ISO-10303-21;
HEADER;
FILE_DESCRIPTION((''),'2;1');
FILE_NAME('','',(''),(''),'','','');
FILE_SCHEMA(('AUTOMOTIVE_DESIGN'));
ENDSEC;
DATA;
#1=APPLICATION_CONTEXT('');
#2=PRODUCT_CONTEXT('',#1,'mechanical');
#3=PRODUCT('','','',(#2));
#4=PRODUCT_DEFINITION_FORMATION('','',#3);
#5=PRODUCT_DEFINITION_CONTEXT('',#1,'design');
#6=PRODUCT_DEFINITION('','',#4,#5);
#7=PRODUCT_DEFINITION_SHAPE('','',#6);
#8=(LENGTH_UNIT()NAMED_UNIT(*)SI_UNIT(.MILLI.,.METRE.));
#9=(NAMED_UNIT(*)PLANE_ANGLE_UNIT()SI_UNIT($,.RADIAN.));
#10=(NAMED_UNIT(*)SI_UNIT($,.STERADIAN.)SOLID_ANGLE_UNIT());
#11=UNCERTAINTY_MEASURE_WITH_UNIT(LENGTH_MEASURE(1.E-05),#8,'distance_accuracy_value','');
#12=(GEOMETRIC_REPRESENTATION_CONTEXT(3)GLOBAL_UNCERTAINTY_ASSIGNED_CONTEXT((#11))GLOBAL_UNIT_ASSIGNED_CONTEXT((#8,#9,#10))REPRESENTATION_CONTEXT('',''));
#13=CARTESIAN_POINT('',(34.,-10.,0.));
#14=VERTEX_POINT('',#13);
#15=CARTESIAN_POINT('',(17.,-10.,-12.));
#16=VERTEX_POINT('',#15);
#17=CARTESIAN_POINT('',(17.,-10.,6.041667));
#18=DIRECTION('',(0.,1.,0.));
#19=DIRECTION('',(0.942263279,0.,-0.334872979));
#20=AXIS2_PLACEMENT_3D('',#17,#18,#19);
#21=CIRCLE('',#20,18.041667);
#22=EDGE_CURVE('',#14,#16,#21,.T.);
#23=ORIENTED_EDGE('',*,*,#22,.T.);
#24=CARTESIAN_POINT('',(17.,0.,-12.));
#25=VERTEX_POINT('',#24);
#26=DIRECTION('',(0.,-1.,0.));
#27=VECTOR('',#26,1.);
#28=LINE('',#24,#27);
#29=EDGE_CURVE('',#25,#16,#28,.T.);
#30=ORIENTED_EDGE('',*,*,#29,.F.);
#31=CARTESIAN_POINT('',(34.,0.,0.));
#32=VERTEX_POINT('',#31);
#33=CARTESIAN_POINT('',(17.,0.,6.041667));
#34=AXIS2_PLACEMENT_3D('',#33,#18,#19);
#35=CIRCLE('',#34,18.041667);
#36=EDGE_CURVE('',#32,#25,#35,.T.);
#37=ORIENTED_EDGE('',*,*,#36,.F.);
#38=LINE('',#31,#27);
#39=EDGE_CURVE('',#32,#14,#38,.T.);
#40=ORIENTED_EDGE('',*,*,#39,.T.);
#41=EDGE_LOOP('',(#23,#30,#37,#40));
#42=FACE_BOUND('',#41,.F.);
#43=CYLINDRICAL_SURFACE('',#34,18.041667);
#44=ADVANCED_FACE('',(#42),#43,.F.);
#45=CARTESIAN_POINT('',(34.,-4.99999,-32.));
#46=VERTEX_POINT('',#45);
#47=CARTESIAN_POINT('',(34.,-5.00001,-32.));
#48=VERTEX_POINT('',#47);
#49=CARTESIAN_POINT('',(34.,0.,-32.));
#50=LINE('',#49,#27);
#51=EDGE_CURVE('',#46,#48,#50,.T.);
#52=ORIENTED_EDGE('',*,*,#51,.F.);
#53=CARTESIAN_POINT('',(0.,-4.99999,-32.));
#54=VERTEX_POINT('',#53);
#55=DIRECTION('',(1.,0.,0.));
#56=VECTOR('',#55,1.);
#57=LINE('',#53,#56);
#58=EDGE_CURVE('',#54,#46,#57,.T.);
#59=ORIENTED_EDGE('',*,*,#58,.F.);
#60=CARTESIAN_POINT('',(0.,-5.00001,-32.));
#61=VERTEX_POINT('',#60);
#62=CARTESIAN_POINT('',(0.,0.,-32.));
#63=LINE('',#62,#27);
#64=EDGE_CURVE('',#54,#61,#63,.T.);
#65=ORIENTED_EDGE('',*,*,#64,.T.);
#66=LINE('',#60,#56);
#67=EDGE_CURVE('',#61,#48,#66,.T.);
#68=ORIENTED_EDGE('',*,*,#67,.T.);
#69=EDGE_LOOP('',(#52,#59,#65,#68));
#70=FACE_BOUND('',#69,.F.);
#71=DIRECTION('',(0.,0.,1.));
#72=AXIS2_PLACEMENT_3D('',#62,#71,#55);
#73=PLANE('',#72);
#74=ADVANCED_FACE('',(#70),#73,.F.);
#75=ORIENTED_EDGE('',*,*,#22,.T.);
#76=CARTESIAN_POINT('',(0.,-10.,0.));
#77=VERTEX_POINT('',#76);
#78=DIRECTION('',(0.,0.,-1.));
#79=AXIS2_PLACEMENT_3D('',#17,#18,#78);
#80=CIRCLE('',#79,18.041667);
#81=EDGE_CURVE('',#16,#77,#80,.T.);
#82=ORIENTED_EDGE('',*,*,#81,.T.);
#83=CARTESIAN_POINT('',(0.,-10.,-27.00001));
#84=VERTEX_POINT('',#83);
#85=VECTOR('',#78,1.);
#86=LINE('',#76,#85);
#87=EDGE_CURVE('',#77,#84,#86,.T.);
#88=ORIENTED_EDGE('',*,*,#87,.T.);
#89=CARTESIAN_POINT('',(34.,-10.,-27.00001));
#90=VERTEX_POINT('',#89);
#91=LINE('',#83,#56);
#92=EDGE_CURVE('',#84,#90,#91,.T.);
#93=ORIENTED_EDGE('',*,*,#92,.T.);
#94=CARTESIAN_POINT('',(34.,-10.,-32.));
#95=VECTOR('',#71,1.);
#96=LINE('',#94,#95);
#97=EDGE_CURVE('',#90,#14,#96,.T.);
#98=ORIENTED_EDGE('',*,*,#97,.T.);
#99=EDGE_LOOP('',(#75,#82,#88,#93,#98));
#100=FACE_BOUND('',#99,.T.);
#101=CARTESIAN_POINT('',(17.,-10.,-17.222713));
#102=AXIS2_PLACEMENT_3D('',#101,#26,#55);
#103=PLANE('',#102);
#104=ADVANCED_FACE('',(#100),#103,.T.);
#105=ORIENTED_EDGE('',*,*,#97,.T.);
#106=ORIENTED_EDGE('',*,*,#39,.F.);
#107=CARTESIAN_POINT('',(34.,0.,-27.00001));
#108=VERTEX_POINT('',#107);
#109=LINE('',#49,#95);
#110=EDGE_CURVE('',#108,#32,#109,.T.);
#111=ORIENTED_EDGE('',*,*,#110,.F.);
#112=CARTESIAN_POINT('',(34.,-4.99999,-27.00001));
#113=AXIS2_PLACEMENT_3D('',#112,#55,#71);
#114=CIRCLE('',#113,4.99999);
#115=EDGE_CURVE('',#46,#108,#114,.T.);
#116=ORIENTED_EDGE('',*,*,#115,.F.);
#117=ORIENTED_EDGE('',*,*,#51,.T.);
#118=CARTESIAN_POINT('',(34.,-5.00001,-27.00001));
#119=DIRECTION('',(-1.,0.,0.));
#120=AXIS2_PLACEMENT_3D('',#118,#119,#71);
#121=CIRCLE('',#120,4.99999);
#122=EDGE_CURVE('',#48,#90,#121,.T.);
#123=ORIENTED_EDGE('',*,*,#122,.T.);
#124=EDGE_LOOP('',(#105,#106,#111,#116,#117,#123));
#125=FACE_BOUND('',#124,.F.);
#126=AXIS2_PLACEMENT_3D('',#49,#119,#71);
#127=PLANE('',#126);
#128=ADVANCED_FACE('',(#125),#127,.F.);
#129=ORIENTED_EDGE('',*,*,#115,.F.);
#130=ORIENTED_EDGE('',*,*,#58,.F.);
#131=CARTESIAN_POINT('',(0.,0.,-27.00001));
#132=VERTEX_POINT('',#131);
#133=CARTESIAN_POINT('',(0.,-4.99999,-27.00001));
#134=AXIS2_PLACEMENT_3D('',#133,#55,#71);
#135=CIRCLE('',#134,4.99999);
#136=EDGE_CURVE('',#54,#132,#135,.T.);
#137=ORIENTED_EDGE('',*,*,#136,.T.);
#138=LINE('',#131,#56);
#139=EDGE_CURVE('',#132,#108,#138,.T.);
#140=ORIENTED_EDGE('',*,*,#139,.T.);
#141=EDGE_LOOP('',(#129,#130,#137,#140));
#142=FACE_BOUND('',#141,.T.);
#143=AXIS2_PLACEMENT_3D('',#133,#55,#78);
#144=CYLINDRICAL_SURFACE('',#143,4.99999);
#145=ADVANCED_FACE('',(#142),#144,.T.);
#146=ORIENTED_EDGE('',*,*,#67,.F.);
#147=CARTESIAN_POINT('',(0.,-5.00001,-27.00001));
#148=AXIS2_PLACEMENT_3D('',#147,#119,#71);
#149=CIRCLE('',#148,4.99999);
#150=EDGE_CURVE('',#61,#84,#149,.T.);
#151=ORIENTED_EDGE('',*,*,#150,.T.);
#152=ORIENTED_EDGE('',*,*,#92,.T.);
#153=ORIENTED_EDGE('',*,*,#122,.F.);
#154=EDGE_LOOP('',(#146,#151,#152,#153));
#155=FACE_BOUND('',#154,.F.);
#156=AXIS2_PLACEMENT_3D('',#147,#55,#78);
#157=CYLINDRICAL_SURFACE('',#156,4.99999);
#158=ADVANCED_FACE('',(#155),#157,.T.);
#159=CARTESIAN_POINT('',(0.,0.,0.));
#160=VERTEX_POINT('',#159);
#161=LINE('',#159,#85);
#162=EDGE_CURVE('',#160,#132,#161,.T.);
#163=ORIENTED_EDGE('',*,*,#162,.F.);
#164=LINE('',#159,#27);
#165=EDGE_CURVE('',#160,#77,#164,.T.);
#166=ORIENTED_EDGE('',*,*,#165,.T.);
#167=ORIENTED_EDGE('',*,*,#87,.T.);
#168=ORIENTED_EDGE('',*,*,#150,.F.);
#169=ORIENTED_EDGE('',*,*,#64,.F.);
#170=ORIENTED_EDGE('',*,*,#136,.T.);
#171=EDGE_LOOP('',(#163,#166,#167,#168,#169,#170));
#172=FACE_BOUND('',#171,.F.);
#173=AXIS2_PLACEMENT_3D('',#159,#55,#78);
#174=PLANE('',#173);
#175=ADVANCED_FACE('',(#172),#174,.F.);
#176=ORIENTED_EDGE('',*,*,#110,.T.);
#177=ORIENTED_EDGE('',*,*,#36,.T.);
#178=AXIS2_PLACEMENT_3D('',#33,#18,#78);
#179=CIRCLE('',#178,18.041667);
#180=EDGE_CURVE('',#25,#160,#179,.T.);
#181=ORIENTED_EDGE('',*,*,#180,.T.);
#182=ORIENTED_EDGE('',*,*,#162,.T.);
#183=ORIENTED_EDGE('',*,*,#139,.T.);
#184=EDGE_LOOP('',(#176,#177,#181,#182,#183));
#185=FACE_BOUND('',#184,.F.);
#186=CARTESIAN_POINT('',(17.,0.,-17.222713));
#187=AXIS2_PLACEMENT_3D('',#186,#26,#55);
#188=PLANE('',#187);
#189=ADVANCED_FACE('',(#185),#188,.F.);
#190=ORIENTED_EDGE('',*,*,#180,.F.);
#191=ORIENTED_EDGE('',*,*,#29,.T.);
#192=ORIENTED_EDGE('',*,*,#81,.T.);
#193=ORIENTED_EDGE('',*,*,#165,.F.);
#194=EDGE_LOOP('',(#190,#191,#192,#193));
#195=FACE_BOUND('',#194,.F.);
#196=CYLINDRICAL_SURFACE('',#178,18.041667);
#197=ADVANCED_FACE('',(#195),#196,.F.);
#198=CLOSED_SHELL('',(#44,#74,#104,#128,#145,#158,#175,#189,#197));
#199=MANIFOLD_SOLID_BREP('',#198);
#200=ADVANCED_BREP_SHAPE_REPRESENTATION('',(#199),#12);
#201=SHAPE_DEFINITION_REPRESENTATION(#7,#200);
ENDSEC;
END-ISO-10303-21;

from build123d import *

# Parameters (mm, degrees)
F1_DEPTH = 10
F2_R     = 4.99999


# Not quite as in the source:
# - a fillet or chamfer is up to 0.001 mm smaller than in the source, because OpenCascade refuses the exact size


with BuildPart() as f1:
    # F0 (on Front) → F1 (new body)
    with BuildSketch(Plane.XZ):
        with BuildLine():
            Line((34, -32), (34, 0))
            ThreePointArc((34, 0), (27.4043260233, -8.6977951997), (17, -12))
            ThreePointArc((17, -12), (6.5956739767, -8.6977951997), (0, 0))
            Line((0, 0), (0, -5))
            Line((0, -5), (0, -32))
            Line((0, -32), (34, -32))
        make_face()
    extrude(amount=F1_DEPTH)

    # F2 (radius 5 in the source; OpenCascade refuses exactly that, so slightly less here)
    f2_edges = [f1.edges().sort_by_distance(p)[0] for p in [
        (17, 0, -32),
        (17, -10, -32),
    ]]
    fillet(f2_edges, radius=F2_R)


solid = f1.part
